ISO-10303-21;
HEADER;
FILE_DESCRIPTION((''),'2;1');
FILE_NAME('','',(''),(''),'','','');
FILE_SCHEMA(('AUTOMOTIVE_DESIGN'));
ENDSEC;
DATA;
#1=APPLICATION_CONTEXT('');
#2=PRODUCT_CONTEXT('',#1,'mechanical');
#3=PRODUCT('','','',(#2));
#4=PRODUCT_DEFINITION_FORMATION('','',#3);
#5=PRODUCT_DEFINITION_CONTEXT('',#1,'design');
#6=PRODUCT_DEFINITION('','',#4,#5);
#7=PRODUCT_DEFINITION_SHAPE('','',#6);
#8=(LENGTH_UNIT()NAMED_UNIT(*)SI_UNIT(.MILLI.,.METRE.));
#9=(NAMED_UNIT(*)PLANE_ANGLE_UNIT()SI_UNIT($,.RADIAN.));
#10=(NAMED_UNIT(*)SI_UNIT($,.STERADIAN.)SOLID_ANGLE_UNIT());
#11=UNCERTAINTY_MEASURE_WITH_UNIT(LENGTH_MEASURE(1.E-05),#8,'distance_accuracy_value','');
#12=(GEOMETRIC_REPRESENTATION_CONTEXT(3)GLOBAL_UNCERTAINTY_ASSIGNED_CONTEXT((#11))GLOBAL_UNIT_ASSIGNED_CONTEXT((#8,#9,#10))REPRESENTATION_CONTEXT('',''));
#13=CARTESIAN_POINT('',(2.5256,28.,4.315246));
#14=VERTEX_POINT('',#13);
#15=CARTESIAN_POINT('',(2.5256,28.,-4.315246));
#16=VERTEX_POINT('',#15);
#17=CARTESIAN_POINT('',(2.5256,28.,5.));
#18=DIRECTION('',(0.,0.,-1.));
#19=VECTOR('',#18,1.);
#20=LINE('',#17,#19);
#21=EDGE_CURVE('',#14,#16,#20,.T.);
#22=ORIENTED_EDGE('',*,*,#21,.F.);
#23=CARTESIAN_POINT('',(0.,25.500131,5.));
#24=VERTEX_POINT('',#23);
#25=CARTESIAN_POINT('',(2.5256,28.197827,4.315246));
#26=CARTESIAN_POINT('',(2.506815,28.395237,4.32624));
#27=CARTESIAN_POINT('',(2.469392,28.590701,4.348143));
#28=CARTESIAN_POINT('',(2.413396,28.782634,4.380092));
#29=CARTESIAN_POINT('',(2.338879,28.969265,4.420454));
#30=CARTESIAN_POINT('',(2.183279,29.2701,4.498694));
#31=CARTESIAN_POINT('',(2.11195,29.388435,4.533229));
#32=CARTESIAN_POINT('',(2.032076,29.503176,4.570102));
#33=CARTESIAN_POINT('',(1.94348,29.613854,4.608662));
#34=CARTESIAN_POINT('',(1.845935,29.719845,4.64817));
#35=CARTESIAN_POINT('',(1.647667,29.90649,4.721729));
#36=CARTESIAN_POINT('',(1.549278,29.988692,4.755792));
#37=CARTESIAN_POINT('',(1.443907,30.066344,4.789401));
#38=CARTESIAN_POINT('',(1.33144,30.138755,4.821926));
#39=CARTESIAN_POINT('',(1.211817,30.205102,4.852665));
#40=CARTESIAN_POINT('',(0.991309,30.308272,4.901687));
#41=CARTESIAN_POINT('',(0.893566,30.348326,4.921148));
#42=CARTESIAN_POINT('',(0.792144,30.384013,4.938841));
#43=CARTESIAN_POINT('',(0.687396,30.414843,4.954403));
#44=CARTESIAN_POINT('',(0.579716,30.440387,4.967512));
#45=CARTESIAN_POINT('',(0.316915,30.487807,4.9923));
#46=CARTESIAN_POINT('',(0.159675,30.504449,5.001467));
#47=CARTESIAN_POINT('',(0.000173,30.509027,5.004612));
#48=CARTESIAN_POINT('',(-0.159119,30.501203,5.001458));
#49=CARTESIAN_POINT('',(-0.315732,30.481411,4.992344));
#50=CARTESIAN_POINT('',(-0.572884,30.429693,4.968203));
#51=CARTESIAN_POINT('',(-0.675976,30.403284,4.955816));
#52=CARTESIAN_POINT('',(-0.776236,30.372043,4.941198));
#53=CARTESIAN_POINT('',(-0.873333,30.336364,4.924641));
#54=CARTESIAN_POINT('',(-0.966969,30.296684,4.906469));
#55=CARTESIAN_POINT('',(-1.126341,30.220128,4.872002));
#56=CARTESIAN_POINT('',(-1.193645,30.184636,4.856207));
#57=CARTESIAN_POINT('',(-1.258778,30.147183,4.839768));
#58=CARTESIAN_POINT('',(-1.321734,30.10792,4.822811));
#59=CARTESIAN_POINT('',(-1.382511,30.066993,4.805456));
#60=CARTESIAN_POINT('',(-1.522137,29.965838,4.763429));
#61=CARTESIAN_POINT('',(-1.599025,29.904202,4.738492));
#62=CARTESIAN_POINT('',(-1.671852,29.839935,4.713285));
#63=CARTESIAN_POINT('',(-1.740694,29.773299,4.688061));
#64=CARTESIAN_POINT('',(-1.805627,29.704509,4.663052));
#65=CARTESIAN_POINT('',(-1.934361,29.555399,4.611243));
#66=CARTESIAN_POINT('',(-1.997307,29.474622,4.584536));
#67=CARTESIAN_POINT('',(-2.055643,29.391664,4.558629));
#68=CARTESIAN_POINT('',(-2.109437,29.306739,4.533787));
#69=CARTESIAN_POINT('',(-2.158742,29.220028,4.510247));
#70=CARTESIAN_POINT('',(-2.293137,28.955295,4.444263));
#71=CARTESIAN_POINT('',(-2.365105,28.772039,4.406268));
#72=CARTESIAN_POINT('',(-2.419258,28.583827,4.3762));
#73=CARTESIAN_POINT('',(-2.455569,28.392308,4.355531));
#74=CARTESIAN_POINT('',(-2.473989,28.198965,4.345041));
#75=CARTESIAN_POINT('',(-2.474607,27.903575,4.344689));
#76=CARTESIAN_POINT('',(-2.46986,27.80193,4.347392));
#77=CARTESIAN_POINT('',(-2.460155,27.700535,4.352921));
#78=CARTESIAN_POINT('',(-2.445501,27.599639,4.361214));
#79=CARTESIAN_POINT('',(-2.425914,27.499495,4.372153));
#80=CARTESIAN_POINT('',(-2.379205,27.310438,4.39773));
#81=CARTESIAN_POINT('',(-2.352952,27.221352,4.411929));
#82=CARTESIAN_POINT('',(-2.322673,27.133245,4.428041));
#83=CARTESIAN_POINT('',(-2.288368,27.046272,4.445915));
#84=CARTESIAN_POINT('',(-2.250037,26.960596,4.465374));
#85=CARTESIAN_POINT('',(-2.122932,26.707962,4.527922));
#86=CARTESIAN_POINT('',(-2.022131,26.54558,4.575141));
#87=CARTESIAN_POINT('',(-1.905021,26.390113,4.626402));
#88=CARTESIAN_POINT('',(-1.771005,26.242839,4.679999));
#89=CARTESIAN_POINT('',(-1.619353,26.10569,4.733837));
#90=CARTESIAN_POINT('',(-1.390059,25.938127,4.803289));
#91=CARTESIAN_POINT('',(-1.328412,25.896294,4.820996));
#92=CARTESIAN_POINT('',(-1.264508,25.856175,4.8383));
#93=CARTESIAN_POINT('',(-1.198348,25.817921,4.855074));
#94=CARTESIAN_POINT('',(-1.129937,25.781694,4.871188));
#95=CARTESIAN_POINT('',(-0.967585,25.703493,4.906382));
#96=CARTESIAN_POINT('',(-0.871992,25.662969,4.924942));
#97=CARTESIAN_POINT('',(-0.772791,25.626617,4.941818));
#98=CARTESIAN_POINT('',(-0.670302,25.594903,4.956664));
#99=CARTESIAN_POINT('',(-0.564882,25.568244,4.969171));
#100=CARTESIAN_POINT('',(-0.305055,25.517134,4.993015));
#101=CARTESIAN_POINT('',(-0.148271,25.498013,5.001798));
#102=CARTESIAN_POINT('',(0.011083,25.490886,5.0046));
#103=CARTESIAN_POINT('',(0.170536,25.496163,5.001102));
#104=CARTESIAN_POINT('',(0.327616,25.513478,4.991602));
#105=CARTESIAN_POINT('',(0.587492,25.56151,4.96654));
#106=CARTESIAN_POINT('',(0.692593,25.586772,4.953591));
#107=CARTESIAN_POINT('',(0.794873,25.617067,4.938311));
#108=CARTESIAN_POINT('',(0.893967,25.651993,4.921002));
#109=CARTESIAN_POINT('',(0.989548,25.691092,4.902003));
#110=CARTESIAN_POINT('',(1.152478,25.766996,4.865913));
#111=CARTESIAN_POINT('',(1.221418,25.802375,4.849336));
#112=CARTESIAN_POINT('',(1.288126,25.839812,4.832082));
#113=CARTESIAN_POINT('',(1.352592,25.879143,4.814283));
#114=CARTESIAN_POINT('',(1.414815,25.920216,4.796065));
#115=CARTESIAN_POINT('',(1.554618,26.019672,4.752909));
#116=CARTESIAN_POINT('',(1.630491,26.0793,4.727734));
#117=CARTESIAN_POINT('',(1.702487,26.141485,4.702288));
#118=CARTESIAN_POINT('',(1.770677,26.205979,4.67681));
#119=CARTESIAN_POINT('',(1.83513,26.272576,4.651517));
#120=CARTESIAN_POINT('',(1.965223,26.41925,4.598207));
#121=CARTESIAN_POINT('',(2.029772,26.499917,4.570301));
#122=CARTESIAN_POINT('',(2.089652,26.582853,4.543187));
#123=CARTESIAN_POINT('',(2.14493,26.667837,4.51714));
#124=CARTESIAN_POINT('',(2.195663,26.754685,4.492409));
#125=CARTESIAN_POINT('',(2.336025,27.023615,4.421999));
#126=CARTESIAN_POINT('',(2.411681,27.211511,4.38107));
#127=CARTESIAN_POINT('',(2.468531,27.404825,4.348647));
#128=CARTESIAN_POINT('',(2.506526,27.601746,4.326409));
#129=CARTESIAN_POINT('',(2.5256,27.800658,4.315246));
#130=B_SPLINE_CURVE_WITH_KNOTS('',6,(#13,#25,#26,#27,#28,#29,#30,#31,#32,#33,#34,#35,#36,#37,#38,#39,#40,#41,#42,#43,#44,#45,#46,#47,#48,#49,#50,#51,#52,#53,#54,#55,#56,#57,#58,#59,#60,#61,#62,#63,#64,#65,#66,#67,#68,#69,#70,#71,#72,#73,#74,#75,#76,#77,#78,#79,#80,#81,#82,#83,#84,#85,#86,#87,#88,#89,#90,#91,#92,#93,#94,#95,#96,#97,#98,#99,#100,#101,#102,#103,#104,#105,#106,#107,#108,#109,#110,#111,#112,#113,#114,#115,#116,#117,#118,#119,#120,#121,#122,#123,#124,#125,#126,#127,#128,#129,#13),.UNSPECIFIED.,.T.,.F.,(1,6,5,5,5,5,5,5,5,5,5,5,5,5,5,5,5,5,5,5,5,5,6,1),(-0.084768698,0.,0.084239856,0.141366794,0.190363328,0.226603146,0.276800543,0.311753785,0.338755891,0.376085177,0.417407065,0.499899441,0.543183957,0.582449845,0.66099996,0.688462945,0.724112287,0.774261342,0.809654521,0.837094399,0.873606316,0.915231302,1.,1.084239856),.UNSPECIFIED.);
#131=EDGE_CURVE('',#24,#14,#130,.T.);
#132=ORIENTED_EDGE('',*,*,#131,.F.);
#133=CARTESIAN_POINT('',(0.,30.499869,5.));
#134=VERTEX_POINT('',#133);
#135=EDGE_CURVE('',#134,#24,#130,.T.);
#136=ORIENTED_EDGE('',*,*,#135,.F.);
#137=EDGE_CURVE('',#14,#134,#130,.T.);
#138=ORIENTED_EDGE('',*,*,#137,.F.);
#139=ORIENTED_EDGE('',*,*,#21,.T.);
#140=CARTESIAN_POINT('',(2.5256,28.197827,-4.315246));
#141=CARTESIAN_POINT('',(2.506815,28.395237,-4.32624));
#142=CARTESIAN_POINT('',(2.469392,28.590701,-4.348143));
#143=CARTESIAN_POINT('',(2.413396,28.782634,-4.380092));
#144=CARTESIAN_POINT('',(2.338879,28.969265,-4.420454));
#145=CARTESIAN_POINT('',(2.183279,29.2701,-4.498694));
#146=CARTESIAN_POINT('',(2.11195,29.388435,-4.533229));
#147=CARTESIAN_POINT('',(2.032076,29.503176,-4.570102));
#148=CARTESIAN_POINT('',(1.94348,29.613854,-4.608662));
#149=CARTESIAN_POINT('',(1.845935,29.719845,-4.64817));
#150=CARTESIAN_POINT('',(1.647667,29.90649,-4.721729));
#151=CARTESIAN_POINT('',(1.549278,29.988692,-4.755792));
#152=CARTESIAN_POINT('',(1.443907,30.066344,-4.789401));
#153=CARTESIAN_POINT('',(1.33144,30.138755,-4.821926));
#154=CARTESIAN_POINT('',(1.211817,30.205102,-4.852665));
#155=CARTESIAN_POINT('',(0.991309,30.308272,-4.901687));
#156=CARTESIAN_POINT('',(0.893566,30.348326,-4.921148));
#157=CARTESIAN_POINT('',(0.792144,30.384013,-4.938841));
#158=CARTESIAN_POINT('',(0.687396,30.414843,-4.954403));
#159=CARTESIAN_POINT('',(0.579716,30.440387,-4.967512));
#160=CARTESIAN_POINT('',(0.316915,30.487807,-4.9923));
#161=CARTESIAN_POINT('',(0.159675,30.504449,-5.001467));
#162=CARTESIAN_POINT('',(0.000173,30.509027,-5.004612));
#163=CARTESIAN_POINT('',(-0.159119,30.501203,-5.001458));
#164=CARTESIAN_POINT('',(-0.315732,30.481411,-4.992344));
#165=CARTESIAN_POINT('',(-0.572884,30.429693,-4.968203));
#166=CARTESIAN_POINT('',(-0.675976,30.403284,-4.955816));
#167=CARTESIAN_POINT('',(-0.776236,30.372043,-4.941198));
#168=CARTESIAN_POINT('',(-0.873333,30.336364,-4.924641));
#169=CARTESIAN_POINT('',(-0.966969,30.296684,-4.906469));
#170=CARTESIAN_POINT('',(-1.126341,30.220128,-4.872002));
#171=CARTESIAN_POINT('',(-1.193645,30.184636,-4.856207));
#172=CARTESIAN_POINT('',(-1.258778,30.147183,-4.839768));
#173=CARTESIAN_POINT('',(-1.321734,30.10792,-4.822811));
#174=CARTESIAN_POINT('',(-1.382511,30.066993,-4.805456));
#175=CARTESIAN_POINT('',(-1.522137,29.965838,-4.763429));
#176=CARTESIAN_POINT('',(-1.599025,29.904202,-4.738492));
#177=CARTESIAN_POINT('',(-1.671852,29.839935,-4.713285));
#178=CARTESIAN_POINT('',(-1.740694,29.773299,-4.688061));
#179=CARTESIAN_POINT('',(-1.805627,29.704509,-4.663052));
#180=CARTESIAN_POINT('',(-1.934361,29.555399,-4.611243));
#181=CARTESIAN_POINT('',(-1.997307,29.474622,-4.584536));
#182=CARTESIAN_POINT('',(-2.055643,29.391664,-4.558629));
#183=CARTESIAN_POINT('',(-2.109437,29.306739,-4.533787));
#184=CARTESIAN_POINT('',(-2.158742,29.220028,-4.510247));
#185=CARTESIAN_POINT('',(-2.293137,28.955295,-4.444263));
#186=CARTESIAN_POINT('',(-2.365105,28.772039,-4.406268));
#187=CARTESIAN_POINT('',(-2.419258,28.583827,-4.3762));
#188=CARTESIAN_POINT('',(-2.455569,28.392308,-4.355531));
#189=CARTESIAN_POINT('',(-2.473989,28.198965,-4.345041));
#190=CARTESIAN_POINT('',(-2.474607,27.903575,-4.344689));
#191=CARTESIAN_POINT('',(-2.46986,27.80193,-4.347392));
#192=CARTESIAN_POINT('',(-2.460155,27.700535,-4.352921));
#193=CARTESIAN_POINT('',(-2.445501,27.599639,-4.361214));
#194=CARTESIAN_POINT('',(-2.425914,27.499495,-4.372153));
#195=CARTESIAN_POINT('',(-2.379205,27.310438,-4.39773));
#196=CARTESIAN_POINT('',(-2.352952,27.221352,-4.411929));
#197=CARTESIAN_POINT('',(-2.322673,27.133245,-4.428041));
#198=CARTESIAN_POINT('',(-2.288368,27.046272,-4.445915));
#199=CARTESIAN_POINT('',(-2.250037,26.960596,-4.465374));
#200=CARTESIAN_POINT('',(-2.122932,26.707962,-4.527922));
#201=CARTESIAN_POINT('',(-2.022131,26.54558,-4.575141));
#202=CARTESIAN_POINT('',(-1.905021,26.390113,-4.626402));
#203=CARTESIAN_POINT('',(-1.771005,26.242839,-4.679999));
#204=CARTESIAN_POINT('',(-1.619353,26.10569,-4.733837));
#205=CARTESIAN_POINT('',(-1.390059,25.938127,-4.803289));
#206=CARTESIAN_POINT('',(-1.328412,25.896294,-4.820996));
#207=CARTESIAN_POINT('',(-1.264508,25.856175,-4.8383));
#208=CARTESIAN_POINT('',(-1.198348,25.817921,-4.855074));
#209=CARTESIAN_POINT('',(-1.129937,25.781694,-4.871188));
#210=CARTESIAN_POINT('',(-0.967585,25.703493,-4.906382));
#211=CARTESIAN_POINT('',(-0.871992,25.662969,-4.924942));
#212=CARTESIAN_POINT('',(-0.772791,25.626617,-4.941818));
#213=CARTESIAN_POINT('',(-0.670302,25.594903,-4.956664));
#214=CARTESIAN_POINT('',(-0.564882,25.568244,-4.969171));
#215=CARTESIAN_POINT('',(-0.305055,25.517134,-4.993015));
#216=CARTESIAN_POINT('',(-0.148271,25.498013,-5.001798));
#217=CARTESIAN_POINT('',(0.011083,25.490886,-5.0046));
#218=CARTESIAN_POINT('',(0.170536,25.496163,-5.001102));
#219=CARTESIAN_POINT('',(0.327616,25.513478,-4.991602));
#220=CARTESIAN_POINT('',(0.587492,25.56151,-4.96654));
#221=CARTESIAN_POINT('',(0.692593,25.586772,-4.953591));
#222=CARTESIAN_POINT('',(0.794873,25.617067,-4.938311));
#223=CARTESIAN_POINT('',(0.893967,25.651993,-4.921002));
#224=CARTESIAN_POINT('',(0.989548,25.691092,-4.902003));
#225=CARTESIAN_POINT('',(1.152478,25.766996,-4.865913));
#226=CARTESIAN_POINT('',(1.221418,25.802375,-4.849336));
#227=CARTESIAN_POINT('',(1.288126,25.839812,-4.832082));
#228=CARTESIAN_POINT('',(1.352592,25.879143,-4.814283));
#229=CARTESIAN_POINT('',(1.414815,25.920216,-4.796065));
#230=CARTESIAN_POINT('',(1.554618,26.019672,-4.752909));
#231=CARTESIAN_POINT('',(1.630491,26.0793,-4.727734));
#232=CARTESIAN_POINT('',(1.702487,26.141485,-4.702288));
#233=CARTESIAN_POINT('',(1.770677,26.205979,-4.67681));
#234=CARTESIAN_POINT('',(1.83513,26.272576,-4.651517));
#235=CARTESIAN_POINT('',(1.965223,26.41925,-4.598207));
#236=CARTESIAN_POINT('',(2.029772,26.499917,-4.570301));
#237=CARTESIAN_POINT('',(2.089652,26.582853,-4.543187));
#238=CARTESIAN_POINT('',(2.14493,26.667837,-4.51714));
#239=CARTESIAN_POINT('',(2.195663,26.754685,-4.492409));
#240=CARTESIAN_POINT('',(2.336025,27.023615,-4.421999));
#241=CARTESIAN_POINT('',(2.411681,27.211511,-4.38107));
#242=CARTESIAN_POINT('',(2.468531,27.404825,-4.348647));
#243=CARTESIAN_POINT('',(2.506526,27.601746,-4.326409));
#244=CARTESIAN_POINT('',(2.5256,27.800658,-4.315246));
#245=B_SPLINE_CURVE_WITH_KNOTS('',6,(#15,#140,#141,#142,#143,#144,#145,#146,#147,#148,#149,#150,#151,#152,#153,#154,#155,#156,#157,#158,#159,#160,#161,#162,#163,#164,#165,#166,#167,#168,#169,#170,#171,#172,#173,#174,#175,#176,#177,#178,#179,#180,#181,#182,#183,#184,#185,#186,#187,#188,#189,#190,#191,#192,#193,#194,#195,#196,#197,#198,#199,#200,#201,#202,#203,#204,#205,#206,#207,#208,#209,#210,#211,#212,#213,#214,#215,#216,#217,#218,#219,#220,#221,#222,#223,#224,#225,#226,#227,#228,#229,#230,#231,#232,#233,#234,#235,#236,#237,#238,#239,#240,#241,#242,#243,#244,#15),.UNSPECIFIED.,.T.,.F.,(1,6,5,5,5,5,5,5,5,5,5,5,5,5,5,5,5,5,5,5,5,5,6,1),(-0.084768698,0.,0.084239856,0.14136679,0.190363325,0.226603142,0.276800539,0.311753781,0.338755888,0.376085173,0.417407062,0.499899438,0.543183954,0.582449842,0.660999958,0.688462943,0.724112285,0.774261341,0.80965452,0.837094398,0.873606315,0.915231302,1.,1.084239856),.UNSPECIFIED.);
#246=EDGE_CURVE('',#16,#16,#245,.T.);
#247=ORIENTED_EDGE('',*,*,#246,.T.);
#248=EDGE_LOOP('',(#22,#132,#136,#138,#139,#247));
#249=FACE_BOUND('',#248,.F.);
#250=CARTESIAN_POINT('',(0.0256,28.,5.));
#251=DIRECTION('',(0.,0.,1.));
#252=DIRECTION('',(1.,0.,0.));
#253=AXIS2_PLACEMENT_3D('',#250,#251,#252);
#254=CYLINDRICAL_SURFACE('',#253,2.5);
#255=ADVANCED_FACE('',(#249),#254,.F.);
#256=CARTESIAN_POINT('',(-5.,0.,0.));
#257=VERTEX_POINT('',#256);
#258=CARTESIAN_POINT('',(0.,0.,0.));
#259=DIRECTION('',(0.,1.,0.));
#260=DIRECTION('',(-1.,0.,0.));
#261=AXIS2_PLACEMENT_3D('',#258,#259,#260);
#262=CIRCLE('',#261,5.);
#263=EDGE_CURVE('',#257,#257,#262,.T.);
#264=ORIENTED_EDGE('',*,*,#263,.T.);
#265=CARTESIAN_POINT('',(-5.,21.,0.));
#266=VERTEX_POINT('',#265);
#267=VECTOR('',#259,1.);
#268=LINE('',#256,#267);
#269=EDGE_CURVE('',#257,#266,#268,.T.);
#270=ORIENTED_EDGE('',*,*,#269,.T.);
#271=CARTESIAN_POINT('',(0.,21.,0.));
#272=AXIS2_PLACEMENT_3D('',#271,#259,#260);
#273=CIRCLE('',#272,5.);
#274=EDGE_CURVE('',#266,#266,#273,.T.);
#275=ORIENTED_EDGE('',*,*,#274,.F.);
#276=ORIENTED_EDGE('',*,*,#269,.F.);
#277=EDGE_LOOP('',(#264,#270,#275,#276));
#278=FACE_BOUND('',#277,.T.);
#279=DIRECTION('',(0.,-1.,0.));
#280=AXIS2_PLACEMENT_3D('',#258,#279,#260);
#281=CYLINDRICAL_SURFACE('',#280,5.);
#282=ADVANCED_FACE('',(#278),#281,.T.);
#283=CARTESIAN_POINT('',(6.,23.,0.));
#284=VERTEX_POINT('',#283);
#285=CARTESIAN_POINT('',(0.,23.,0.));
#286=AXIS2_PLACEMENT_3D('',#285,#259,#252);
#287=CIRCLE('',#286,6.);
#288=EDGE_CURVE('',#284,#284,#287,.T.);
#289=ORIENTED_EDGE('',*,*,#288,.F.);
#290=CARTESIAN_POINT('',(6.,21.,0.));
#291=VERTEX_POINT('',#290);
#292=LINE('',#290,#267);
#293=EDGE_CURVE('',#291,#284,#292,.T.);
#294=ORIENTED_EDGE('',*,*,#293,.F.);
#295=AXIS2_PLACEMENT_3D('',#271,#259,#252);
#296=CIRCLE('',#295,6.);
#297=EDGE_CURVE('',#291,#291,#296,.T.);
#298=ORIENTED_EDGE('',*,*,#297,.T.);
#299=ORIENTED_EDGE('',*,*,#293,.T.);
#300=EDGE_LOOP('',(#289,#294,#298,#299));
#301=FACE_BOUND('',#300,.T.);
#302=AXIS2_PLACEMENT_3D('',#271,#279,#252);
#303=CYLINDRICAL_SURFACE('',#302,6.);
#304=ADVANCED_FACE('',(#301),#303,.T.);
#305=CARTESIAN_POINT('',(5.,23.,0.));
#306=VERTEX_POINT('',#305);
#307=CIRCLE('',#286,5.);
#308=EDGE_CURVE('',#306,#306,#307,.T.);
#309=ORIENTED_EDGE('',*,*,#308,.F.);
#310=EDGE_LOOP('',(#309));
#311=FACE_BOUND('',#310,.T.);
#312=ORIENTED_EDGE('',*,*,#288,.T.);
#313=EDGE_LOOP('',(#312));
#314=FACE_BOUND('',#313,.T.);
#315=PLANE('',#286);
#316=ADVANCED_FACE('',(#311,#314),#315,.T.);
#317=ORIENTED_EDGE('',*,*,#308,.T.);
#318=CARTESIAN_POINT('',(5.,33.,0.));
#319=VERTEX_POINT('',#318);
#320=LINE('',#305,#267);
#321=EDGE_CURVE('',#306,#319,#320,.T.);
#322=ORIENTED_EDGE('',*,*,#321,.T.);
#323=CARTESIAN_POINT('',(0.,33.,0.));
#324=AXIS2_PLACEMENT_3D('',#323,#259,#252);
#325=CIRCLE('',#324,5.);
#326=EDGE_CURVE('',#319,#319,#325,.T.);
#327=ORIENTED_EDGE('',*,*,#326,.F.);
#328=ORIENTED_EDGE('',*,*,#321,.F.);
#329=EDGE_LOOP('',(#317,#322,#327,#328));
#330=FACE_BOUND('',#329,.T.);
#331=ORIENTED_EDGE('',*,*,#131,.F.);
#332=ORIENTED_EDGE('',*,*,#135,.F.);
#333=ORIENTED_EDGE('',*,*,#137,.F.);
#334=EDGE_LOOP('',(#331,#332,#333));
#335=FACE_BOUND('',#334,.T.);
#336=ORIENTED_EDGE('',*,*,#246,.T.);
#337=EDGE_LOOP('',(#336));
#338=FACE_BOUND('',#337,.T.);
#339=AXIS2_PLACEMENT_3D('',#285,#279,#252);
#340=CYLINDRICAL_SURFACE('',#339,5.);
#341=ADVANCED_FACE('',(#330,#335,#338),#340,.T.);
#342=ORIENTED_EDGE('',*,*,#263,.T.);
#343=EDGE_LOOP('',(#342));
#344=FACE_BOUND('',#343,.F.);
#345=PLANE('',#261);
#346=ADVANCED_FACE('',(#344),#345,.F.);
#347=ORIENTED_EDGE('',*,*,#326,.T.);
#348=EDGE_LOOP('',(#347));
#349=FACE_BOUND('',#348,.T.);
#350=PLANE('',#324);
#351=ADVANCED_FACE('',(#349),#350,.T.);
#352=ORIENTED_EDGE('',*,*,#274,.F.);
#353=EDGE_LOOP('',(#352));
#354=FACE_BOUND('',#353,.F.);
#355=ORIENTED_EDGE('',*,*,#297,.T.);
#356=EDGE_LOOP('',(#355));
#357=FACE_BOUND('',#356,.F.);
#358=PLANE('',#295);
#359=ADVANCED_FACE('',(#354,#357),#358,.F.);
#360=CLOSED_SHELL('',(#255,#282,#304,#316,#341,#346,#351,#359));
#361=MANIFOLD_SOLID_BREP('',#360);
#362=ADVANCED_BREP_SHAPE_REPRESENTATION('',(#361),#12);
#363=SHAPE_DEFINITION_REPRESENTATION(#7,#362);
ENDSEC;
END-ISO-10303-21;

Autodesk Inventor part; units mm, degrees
ref_plane "YZ Plane" through (0, 0, 0) normal (1, 0, 0) x (0, 1, 0)
ref_plane "XZ Plane" through (0, 0, 0) normal (0, 1, 0) x (-1, 0, 0)
sketch "Boceto1" plane through (0, 0, 0) normal (0, 1, 0) x (-1, 0, 0)
  circle A0 centre (0, 0) radius 5
  dimension "d0" = 10
extrude "Extrusión1" add sketch "Boceto1" along normal blind 21
thread "Rosca1" size "M9x1.25" class "6g" standard "ANSI Metric M Profile" length 13
sketch "Boceto2" plane through (0, 21, 0) normal (0, 1, 0) x (1, 0, 0)
  circle A0 centre (0, 0) radius 6
  dimension "d5" = 12
extrude "Extrusión2" add sketch "Boceto2" along normal blind 2
sketch "Boceto3" plane through (0, 23, 0) normal (0, 1, 0) x (1, 0, 0)
  circle A0 centre (0, 0) radius 5
  dimension "d8" = 10
extrude "Extrusión3" add sketch "Boceto3" along normal blind 10
ref_plane "Plano de trabajo1" through (0, 23, 5) normal (0, 0, 1) x (1, 0, 0)
sketch "Boceto4" plane through (0, 23, 5) normal (0, 0, 1) x (1, 0, 0)
  line L0 (5, 10) -> (-5, 10) projected
  line L1 (-5, 10) -> (5.0514, 0) construction
  line L2 (6, 0) -> (-6, 0) projected
  line L3 (5, 0) -> (5, 10) projected
  line L4 (5, 10) -> (-4.9489, 0) construction
  circle A0 centre (0.0256, 5) radius 2.5
  point P0 (0, -23)
  dimension "d11" = 5
extrude "Extrusión4" cut sketch "Boceto4" against normal through all
